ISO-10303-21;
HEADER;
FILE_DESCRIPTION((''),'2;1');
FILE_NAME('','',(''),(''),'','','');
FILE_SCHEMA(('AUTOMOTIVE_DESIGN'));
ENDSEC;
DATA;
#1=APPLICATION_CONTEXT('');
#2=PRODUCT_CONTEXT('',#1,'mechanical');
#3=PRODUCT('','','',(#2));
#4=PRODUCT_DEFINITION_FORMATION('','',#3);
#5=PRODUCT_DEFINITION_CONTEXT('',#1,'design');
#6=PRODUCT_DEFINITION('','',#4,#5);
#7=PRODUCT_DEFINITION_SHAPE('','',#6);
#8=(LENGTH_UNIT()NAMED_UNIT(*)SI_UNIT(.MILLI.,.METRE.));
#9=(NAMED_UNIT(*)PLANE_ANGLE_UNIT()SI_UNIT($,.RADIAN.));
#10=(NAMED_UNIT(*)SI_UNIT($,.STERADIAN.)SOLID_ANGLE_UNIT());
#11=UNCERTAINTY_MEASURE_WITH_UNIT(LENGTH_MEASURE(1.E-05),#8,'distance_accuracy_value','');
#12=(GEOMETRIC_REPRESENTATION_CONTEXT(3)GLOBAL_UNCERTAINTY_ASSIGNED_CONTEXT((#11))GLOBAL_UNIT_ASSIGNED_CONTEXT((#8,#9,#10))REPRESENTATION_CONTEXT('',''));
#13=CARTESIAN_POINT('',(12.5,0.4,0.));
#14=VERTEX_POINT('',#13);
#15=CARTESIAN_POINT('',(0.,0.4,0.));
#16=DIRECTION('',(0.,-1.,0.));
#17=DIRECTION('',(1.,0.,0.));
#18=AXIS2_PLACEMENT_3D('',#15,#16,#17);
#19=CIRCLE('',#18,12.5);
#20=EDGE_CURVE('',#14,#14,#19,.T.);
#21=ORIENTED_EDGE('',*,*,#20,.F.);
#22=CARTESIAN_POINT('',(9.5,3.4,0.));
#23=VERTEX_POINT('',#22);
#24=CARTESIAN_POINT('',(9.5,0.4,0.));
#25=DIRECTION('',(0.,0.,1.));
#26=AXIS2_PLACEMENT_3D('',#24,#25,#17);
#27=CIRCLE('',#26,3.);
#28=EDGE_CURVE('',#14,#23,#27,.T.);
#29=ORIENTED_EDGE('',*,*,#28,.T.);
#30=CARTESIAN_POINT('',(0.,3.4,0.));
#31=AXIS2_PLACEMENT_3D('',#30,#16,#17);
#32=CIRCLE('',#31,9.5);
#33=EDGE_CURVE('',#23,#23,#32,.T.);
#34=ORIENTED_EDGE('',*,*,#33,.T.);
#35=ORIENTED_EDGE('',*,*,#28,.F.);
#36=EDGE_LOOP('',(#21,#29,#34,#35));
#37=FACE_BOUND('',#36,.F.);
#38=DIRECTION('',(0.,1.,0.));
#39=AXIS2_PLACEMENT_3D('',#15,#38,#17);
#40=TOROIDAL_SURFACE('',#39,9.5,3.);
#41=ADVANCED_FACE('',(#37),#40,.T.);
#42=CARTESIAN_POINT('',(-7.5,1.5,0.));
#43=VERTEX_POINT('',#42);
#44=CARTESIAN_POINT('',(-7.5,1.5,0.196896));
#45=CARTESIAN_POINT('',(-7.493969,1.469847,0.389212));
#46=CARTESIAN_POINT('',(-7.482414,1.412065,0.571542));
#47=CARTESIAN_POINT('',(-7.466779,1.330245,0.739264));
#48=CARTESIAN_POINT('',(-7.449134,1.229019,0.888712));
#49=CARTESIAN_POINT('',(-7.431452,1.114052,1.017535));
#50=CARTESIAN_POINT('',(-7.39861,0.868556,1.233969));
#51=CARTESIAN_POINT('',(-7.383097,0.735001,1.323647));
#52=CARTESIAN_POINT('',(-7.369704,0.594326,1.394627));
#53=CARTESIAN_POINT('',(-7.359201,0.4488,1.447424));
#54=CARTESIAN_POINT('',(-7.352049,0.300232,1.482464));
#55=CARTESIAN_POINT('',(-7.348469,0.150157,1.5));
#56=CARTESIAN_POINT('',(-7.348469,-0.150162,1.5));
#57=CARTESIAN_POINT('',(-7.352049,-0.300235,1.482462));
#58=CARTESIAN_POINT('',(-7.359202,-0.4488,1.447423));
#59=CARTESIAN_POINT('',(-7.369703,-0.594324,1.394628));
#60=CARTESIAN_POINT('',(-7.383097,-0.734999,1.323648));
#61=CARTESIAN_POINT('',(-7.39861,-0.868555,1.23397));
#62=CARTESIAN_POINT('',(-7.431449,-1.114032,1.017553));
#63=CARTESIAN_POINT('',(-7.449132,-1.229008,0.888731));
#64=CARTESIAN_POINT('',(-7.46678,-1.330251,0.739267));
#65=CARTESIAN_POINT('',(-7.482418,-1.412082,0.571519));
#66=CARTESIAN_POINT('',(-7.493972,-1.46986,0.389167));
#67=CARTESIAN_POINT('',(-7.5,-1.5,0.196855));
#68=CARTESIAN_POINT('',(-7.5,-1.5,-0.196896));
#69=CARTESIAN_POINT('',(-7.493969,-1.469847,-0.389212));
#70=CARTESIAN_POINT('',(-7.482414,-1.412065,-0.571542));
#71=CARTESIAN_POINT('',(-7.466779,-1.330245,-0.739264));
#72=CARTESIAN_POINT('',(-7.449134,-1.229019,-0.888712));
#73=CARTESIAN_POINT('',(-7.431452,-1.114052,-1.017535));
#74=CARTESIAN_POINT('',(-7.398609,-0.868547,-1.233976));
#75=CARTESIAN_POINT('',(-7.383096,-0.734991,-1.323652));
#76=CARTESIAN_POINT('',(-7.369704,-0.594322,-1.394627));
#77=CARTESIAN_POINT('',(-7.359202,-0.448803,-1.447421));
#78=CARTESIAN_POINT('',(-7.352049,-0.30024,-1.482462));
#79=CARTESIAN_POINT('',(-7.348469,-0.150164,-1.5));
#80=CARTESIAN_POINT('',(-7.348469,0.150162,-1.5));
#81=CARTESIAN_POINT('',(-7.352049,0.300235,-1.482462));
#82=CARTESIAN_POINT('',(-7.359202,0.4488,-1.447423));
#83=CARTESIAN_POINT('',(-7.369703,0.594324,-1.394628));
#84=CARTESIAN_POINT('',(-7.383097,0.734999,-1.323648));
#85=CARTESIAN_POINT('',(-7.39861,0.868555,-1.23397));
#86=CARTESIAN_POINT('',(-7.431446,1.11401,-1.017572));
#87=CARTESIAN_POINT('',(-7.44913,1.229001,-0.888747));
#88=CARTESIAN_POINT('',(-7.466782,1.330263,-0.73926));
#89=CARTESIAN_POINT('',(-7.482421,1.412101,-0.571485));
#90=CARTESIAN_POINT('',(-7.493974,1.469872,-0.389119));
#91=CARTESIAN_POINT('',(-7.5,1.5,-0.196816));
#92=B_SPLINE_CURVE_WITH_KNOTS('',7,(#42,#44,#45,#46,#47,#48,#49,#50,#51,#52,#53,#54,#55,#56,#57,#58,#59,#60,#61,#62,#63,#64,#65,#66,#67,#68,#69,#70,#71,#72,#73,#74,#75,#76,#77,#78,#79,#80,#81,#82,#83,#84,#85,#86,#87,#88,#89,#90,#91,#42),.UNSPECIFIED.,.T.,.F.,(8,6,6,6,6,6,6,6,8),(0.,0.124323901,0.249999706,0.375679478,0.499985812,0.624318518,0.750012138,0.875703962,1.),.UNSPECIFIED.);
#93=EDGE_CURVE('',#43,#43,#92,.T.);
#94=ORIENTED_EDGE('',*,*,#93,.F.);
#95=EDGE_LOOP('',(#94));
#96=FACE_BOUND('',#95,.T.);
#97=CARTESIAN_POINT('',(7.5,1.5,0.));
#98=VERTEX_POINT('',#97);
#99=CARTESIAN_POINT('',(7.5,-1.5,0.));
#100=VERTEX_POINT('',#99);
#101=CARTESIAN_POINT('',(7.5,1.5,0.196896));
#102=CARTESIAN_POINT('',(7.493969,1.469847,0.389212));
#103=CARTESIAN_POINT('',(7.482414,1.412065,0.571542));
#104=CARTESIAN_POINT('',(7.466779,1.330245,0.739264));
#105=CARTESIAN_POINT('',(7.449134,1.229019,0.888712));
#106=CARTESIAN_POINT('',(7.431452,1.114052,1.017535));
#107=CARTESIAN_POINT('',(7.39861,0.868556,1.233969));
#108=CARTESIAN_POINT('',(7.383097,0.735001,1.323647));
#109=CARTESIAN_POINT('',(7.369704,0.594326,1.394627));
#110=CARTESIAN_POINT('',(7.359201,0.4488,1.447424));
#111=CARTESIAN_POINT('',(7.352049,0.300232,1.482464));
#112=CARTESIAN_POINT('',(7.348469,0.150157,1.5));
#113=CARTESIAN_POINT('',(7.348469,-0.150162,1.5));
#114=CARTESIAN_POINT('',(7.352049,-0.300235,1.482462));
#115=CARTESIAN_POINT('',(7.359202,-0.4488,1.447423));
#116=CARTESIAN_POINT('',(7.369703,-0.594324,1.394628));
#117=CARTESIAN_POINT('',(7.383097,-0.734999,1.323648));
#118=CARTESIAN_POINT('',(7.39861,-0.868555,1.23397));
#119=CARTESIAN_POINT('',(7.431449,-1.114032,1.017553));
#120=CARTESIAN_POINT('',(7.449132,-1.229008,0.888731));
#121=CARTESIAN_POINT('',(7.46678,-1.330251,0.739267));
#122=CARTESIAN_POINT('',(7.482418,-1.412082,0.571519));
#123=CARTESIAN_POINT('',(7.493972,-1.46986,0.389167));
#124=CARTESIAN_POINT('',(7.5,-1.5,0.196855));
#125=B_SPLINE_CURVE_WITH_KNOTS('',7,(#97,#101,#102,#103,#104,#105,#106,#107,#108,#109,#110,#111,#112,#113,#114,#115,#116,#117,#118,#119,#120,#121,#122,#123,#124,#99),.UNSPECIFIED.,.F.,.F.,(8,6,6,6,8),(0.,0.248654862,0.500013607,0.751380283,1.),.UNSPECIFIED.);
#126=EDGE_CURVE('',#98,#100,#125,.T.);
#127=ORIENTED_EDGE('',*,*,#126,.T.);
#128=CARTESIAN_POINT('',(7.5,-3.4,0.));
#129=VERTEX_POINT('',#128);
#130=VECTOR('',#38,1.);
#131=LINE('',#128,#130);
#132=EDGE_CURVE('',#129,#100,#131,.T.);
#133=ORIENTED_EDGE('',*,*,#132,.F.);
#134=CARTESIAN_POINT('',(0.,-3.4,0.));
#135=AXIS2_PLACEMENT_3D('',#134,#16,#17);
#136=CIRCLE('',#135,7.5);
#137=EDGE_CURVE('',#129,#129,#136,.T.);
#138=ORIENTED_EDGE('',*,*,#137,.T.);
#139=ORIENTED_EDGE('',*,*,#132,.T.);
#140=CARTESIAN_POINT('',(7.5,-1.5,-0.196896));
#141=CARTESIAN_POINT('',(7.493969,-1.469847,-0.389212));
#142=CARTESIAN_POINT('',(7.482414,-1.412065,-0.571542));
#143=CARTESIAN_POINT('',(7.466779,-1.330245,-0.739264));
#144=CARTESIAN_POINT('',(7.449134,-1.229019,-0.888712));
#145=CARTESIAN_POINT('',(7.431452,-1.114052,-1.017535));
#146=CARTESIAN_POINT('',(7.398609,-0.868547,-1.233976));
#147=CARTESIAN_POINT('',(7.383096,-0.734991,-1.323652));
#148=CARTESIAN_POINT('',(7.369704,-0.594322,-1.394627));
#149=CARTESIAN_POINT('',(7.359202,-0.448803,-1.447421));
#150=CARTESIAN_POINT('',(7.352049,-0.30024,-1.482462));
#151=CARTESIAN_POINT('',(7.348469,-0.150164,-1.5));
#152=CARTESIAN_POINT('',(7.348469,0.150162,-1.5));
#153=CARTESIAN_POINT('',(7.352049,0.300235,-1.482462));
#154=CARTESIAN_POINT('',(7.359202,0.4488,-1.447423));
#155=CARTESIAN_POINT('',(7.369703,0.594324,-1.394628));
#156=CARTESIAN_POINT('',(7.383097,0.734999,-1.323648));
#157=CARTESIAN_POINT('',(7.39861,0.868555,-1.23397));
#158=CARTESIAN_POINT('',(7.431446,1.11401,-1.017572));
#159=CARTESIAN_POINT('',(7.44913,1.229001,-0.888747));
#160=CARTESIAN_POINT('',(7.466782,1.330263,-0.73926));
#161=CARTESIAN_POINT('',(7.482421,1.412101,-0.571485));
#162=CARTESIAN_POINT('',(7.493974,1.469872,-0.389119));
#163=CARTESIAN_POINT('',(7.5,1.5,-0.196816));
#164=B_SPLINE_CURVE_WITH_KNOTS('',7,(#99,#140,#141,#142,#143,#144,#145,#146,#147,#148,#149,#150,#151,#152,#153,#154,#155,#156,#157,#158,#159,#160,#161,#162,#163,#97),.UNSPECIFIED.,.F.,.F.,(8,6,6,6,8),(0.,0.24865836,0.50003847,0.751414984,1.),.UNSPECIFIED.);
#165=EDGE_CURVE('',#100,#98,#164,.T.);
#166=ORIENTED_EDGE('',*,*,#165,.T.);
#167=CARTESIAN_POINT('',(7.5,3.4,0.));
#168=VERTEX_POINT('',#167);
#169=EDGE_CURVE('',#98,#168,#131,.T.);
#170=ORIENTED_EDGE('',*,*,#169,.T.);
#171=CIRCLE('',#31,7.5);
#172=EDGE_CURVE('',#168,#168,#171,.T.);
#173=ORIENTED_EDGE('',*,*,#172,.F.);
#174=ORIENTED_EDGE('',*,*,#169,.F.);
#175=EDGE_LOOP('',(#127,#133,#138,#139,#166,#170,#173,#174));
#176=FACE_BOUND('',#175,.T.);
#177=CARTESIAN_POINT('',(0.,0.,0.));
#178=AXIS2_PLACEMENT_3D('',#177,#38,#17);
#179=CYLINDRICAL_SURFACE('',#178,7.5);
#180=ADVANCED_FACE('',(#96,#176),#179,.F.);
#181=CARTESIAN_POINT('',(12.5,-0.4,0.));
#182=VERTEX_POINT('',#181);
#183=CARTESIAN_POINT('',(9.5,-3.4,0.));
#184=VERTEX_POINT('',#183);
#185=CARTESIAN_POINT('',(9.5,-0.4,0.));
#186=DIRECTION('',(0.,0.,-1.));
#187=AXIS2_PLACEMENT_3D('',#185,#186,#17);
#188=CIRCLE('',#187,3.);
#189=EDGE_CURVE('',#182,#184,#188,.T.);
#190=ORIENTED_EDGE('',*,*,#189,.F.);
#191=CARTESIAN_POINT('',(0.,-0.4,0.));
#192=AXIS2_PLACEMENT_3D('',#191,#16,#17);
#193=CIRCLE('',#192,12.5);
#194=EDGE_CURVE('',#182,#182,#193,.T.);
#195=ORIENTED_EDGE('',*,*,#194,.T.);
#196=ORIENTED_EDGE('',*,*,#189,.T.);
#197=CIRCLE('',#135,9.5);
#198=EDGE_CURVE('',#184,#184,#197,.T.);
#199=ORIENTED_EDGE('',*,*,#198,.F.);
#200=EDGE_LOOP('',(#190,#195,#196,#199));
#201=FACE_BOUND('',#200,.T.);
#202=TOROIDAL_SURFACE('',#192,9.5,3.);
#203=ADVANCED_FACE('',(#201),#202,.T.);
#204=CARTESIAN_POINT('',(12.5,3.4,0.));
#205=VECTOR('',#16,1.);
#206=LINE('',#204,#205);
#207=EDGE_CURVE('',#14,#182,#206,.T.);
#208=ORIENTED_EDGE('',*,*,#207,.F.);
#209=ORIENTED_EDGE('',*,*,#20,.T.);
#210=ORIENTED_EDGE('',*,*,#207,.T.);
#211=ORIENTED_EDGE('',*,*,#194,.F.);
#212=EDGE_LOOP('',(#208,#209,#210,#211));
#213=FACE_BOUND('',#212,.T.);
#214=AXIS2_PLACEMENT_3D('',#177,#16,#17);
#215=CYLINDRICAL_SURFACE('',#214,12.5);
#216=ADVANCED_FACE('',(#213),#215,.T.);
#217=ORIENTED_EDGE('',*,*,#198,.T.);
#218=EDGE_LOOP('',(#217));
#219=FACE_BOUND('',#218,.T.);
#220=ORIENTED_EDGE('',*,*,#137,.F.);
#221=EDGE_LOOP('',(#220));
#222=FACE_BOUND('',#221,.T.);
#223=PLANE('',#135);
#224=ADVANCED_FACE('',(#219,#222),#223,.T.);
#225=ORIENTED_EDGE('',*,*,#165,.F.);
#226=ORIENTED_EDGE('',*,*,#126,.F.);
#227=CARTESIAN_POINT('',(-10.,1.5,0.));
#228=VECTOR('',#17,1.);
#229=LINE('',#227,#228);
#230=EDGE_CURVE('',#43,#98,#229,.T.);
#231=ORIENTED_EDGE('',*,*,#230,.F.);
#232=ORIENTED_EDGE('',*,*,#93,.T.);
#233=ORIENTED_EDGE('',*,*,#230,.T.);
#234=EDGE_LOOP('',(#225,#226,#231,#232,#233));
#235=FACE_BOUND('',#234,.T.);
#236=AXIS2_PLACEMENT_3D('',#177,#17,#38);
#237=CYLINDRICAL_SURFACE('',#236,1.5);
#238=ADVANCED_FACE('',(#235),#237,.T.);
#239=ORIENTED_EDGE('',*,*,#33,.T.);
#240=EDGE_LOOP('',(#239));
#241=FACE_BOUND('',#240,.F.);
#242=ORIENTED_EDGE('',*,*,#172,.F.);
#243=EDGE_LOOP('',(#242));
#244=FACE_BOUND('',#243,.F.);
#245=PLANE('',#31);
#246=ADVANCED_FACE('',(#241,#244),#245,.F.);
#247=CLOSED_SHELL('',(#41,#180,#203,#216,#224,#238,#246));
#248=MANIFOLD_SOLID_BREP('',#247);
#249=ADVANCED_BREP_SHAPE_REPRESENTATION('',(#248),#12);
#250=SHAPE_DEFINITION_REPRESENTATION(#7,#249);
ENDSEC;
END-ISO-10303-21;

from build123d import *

# Parameters (mm, degrees)
F0_R     = 12.5
F0_R_2   = 7.5
F1_DEPTH = 3.4
F2_R     = 3
F4_R     = 1.5
F5_DEPTH = 10


# Not quite as in the source:
# - the program builds the solid bodies; features that only make, move or delete a surface that nothing else refers to are left out


with BuildPart() as f1:
    # F0 (on Front) → F1 (new body, symmetric)
    with BuildSketch(Plane.XZ):
        Circle(F0_R)
        Circle(F0_R_2, mode=Mode.SUBTRACT)
    extrude(amount=F1_DEPTH, both=True)

    # F2
    f2_edges = [f1.edges().sort_by_distance(p)[0] for p in [
        (-12.5, 3.4, 0),
        (-12.5, -3.4, 0),
    ]]
    fillet(f2_edges, radius=F2_R)

    # F4 (on Right) → F5 (join, symmetric)
    with BuildSketch(Plane.YZ):
        Circle(F4_R)
    extrude(amount=F5_DEPTH, both=True)


solid = f1.part
